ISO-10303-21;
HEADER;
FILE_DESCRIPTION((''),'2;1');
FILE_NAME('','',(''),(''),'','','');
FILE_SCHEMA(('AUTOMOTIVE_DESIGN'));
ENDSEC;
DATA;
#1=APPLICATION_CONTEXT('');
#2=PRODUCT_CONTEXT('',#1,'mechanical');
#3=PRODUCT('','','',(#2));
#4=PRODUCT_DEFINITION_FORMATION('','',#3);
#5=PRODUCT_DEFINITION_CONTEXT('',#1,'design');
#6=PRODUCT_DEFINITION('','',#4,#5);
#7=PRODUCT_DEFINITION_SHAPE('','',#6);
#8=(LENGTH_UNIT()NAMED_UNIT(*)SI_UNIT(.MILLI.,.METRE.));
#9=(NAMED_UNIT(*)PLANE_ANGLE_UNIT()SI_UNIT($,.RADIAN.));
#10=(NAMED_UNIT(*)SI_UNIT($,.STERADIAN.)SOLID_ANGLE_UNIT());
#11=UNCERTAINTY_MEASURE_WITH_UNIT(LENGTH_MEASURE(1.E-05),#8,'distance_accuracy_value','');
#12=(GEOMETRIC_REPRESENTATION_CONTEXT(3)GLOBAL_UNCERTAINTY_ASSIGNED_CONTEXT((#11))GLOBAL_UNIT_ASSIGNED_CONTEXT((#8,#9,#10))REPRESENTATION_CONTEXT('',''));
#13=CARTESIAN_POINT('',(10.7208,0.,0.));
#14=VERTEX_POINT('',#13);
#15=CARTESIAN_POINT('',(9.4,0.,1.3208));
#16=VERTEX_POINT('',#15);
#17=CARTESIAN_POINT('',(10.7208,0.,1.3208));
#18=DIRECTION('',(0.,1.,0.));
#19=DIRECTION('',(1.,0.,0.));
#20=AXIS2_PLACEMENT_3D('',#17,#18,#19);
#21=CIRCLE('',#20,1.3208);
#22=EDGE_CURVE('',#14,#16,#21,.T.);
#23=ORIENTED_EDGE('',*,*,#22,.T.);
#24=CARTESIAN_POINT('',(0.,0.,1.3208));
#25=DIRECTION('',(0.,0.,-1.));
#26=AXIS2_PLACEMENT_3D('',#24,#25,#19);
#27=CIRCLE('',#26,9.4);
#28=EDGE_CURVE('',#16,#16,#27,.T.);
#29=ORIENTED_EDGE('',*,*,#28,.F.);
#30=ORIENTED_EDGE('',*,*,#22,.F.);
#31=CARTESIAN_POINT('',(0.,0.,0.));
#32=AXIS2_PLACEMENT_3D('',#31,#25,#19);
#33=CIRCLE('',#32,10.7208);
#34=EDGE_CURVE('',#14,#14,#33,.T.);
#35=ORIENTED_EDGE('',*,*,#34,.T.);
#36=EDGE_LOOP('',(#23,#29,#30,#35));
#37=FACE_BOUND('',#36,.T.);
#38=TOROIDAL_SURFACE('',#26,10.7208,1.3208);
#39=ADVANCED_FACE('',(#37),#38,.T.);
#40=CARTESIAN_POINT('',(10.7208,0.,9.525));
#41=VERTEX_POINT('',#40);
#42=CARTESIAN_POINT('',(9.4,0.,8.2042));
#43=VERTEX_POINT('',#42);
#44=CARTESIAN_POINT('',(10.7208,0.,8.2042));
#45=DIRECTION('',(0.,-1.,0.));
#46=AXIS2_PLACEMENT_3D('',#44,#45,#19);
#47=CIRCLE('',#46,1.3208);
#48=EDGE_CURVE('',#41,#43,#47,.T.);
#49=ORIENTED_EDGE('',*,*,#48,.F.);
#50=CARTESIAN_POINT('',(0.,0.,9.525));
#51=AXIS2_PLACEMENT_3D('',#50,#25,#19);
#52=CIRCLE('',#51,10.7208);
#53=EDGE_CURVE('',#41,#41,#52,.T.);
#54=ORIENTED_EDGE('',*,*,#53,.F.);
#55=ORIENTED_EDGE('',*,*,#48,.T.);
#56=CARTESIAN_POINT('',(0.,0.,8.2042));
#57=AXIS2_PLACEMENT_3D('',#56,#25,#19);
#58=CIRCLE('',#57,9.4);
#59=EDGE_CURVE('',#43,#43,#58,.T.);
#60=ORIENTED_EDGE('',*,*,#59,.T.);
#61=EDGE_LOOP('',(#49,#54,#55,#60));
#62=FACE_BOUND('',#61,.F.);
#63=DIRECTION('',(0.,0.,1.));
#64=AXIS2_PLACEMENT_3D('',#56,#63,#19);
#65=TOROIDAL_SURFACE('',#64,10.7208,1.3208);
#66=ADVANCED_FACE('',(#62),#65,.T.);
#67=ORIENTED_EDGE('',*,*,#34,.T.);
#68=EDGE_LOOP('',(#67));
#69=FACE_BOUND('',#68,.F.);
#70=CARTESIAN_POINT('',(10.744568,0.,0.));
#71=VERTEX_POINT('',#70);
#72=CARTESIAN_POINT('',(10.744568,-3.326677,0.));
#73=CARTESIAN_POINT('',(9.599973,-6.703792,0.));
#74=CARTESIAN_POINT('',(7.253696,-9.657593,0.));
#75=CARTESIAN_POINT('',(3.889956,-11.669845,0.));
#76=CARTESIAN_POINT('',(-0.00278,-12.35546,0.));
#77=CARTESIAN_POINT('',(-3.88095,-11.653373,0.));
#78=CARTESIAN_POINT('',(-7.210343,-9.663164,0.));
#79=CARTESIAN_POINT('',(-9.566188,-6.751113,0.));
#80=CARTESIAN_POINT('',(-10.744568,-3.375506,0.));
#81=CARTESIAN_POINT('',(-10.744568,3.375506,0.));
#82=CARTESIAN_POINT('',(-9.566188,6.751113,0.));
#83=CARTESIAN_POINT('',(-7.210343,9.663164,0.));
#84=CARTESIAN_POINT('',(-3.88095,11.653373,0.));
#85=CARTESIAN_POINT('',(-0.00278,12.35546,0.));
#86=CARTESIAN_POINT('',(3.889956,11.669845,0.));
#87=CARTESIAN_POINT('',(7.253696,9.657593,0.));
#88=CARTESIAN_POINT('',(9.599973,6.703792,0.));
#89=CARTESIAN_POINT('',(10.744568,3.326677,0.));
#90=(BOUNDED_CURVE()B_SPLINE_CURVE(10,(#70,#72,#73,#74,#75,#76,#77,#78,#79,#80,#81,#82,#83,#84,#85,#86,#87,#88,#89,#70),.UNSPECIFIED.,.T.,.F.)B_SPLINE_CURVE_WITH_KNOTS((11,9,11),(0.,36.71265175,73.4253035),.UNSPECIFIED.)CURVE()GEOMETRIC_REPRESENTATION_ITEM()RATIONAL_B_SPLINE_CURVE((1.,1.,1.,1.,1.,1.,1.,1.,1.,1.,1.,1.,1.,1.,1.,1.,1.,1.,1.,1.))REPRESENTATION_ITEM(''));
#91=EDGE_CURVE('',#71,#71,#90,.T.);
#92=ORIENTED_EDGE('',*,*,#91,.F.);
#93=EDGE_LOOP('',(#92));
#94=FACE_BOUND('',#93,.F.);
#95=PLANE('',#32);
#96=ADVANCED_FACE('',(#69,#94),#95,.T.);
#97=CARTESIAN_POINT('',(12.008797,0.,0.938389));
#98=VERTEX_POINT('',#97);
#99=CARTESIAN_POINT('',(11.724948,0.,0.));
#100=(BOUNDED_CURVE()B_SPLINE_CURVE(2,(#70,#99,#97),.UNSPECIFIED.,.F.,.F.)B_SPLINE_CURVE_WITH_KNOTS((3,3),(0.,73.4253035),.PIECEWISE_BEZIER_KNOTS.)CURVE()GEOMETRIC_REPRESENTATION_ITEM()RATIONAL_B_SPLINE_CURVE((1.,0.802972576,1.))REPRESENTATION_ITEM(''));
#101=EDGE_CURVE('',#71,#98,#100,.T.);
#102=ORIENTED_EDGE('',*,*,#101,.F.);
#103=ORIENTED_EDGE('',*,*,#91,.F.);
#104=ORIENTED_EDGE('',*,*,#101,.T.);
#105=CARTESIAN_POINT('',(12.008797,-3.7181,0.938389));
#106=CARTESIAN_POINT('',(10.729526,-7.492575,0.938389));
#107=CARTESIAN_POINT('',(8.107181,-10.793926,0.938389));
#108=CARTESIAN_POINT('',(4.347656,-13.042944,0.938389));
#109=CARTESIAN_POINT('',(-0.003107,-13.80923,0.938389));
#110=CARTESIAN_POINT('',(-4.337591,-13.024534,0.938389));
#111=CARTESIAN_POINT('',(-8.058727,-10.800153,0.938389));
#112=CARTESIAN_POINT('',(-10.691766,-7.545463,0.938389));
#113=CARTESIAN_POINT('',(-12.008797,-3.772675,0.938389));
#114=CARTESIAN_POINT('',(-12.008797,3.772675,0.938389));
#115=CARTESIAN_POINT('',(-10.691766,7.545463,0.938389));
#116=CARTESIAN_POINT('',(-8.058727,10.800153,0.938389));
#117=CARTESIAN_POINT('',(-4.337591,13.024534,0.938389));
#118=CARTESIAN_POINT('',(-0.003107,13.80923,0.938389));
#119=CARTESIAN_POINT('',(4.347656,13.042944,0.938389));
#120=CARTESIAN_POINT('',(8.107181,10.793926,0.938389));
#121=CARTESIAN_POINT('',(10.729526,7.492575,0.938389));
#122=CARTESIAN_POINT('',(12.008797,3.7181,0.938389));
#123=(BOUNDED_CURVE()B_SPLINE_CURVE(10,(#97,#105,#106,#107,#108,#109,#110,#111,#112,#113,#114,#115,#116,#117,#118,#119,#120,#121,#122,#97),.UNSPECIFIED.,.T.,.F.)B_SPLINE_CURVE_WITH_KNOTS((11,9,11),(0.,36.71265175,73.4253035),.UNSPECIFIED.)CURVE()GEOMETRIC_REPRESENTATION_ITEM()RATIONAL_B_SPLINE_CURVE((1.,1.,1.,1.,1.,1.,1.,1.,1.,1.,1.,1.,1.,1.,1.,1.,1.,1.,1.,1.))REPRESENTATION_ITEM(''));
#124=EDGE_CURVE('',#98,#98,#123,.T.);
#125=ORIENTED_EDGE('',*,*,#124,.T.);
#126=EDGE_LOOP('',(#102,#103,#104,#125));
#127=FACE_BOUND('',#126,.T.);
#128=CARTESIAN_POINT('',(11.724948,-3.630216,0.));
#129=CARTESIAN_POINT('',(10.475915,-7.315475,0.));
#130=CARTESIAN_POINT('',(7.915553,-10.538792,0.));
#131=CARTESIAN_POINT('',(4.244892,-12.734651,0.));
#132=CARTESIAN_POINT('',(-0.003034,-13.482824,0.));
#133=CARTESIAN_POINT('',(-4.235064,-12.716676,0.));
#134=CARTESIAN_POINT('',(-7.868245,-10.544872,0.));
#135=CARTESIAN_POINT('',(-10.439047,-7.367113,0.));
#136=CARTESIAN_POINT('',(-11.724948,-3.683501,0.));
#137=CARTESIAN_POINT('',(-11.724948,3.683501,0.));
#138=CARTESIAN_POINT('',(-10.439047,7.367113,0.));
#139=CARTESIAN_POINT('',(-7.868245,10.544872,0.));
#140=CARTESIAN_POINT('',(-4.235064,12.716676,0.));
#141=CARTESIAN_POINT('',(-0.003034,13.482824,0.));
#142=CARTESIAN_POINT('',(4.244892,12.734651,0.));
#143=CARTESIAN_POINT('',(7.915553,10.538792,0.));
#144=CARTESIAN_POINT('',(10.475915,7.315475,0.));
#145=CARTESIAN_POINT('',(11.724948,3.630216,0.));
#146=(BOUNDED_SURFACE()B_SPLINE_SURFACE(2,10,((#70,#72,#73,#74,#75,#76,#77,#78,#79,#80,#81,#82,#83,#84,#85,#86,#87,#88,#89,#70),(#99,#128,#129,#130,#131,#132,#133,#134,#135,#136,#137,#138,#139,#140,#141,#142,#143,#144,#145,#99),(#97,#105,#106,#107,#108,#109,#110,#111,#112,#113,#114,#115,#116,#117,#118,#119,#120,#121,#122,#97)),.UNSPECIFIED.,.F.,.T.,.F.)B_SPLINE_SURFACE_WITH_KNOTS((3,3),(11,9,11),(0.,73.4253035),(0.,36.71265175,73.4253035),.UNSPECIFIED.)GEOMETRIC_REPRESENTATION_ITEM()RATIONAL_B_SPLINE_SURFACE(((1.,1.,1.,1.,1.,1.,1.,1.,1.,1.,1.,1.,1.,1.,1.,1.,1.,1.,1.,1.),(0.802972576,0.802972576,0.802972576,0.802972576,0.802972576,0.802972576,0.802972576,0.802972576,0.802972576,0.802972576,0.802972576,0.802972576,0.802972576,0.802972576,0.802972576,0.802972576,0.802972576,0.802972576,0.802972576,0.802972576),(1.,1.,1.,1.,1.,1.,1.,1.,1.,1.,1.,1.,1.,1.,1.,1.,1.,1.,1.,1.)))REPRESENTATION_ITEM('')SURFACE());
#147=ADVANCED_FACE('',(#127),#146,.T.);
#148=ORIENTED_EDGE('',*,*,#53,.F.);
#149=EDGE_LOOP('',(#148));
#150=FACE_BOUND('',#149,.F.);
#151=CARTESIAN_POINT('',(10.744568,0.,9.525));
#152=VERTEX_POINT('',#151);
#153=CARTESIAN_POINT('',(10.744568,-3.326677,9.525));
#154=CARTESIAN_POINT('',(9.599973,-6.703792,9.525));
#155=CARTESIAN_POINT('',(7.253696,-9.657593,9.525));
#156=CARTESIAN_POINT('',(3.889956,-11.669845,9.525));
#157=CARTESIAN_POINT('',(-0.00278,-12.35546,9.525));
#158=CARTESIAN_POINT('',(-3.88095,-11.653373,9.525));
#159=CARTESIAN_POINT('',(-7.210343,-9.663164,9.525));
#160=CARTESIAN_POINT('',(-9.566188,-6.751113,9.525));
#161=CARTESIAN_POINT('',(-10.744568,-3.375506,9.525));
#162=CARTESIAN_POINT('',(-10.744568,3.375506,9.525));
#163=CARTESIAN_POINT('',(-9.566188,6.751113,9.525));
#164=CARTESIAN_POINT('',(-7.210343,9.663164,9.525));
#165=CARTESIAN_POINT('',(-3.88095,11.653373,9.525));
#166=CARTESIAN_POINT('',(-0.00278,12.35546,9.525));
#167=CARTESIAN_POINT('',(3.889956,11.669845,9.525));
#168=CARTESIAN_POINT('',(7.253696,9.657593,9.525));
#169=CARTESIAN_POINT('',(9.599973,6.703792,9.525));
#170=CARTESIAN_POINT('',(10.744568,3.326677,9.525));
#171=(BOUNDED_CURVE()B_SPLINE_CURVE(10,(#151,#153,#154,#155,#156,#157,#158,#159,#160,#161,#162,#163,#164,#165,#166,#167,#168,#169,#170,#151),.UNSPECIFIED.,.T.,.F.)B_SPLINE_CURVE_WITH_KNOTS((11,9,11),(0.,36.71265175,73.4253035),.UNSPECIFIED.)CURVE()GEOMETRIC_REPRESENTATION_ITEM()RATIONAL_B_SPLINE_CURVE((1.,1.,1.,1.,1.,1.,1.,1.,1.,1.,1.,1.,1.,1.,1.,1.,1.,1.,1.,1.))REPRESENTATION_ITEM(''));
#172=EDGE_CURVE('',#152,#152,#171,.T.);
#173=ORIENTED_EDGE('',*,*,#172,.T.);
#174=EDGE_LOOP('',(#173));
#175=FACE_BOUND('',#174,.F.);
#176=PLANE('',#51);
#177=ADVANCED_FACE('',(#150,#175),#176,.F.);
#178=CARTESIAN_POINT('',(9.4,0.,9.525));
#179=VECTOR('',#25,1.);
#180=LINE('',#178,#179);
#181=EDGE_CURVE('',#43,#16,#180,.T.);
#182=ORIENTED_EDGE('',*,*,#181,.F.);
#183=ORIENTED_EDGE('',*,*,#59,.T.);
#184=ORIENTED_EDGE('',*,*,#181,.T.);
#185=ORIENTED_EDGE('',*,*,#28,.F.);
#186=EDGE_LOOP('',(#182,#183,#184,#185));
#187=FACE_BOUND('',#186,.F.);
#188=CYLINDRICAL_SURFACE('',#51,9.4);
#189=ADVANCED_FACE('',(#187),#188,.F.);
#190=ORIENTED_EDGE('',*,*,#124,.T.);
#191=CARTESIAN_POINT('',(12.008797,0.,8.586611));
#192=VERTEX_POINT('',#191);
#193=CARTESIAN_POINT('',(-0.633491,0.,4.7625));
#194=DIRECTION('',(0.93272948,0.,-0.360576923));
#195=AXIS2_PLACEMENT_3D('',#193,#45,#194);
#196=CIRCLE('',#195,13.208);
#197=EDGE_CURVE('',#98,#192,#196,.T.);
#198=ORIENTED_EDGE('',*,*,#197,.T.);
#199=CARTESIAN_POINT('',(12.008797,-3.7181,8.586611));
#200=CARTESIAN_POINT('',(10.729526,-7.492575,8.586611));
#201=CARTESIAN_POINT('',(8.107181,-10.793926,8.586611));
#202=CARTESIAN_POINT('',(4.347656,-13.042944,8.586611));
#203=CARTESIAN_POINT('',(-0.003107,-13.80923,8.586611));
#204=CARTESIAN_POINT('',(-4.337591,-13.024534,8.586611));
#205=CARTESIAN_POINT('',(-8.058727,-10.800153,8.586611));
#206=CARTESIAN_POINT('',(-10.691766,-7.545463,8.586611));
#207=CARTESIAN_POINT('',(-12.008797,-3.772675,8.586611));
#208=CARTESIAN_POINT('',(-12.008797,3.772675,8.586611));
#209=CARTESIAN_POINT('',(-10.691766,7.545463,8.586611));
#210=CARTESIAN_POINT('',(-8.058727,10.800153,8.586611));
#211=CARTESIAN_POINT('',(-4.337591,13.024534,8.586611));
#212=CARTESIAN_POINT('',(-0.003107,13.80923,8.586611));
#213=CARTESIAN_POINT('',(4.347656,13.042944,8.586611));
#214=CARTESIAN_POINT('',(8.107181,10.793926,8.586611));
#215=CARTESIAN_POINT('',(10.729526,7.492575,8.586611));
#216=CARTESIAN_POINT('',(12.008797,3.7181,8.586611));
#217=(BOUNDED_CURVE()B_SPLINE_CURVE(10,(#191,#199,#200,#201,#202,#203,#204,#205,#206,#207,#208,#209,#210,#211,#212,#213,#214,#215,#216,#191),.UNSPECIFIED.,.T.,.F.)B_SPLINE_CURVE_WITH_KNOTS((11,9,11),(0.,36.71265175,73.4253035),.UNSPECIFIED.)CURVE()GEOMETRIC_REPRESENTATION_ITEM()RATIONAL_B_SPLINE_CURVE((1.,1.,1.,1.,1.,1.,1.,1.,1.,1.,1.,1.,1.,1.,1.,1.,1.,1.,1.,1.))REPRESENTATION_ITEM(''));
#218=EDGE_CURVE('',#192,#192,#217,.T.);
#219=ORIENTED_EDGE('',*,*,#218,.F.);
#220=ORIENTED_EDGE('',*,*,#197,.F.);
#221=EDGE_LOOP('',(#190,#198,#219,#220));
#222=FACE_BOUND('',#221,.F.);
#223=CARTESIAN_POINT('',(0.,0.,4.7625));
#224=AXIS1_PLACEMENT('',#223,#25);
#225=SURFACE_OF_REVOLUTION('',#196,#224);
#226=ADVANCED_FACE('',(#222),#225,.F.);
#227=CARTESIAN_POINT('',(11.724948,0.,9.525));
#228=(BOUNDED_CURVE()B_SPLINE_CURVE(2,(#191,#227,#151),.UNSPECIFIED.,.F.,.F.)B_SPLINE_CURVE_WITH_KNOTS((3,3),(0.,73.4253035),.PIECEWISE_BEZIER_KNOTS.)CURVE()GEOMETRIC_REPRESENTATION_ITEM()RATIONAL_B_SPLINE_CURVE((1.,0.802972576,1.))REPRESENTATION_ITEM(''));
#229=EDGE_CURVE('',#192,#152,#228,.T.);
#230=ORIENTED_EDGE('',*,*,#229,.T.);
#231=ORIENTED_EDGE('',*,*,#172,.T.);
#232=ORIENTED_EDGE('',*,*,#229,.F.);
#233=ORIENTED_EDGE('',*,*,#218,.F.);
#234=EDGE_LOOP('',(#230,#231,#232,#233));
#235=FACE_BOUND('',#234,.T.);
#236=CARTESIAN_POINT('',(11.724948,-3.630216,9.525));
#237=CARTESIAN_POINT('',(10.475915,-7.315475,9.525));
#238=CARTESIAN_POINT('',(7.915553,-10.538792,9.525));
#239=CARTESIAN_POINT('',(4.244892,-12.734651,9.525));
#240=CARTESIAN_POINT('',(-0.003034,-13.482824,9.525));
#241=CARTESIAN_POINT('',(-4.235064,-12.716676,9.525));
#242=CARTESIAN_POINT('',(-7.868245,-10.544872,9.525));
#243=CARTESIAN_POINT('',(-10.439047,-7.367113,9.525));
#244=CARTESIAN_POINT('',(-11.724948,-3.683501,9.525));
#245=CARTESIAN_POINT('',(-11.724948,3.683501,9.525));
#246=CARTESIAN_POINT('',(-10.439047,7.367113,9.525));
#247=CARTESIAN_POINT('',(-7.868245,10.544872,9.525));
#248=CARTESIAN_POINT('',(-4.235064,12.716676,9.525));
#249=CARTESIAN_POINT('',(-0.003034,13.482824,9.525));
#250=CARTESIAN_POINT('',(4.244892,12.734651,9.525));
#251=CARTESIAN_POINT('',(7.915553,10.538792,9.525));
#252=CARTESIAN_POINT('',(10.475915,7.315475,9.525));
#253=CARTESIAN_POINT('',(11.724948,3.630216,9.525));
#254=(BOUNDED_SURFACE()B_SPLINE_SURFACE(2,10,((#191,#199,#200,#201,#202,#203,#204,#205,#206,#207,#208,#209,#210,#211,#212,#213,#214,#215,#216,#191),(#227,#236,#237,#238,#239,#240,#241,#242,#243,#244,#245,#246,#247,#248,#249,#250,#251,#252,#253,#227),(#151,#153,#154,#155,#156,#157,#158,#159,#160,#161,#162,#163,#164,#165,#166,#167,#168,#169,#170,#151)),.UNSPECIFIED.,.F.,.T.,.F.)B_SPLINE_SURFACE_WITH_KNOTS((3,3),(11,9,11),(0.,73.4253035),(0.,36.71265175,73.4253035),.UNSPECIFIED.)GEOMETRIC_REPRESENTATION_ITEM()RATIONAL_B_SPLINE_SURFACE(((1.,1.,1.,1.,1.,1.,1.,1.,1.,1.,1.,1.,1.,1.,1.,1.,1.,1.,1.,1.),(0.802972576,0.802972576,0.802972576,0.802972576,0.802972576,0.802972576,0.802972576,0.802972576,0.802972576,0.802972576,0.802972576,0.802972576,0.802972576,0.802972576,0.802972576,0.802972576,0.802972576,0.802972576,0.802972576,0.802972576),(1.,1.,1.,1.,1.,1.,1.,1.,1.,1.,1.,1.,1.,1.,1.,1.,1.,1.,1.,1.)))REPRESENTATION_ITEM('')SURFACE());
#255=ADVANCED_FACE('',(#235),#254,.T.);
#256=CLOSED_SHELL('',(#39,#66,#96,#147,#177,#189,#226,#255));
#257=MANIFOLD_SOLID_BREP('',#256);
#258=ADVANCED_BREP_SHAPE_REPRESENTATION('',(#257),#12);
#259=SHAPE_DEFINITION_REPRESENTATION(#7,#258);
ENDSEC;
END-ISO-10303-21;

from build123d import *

# Parameters (mm, degrees)
F2_R = 1.3208


with BuildPart() as f1:
    # F0 (on Front) → F1 (revolve)
    with BuildSketch(Plane.XZ):
        with BuildLine():
            Line((9.4, 0), (11.686, 0))
            ThreePointArc((11.686, 0), (12.5745090304, 4.7625), (11.686, 9.525))
            Line((11.686, 9.525), (9.4, 9.525))
            Line((9.4, 9.525), (9.4, 0))
        make_face()
    revolve(axis=Axis((0, 0, 4.7625), (0, 0, -1)))

    # F2
    f2_edges = [f1.edges().sort_by_distance(p)[0] for p in [
        (-11.686, 0, 9.525),
        (-11.686, 0, 0),
        (-9.4, 0, 9.525),
        (-9.4, 0, 0),
    ]]
    fillet(f2_edges, radius=F2_R)


solid = f1.part
